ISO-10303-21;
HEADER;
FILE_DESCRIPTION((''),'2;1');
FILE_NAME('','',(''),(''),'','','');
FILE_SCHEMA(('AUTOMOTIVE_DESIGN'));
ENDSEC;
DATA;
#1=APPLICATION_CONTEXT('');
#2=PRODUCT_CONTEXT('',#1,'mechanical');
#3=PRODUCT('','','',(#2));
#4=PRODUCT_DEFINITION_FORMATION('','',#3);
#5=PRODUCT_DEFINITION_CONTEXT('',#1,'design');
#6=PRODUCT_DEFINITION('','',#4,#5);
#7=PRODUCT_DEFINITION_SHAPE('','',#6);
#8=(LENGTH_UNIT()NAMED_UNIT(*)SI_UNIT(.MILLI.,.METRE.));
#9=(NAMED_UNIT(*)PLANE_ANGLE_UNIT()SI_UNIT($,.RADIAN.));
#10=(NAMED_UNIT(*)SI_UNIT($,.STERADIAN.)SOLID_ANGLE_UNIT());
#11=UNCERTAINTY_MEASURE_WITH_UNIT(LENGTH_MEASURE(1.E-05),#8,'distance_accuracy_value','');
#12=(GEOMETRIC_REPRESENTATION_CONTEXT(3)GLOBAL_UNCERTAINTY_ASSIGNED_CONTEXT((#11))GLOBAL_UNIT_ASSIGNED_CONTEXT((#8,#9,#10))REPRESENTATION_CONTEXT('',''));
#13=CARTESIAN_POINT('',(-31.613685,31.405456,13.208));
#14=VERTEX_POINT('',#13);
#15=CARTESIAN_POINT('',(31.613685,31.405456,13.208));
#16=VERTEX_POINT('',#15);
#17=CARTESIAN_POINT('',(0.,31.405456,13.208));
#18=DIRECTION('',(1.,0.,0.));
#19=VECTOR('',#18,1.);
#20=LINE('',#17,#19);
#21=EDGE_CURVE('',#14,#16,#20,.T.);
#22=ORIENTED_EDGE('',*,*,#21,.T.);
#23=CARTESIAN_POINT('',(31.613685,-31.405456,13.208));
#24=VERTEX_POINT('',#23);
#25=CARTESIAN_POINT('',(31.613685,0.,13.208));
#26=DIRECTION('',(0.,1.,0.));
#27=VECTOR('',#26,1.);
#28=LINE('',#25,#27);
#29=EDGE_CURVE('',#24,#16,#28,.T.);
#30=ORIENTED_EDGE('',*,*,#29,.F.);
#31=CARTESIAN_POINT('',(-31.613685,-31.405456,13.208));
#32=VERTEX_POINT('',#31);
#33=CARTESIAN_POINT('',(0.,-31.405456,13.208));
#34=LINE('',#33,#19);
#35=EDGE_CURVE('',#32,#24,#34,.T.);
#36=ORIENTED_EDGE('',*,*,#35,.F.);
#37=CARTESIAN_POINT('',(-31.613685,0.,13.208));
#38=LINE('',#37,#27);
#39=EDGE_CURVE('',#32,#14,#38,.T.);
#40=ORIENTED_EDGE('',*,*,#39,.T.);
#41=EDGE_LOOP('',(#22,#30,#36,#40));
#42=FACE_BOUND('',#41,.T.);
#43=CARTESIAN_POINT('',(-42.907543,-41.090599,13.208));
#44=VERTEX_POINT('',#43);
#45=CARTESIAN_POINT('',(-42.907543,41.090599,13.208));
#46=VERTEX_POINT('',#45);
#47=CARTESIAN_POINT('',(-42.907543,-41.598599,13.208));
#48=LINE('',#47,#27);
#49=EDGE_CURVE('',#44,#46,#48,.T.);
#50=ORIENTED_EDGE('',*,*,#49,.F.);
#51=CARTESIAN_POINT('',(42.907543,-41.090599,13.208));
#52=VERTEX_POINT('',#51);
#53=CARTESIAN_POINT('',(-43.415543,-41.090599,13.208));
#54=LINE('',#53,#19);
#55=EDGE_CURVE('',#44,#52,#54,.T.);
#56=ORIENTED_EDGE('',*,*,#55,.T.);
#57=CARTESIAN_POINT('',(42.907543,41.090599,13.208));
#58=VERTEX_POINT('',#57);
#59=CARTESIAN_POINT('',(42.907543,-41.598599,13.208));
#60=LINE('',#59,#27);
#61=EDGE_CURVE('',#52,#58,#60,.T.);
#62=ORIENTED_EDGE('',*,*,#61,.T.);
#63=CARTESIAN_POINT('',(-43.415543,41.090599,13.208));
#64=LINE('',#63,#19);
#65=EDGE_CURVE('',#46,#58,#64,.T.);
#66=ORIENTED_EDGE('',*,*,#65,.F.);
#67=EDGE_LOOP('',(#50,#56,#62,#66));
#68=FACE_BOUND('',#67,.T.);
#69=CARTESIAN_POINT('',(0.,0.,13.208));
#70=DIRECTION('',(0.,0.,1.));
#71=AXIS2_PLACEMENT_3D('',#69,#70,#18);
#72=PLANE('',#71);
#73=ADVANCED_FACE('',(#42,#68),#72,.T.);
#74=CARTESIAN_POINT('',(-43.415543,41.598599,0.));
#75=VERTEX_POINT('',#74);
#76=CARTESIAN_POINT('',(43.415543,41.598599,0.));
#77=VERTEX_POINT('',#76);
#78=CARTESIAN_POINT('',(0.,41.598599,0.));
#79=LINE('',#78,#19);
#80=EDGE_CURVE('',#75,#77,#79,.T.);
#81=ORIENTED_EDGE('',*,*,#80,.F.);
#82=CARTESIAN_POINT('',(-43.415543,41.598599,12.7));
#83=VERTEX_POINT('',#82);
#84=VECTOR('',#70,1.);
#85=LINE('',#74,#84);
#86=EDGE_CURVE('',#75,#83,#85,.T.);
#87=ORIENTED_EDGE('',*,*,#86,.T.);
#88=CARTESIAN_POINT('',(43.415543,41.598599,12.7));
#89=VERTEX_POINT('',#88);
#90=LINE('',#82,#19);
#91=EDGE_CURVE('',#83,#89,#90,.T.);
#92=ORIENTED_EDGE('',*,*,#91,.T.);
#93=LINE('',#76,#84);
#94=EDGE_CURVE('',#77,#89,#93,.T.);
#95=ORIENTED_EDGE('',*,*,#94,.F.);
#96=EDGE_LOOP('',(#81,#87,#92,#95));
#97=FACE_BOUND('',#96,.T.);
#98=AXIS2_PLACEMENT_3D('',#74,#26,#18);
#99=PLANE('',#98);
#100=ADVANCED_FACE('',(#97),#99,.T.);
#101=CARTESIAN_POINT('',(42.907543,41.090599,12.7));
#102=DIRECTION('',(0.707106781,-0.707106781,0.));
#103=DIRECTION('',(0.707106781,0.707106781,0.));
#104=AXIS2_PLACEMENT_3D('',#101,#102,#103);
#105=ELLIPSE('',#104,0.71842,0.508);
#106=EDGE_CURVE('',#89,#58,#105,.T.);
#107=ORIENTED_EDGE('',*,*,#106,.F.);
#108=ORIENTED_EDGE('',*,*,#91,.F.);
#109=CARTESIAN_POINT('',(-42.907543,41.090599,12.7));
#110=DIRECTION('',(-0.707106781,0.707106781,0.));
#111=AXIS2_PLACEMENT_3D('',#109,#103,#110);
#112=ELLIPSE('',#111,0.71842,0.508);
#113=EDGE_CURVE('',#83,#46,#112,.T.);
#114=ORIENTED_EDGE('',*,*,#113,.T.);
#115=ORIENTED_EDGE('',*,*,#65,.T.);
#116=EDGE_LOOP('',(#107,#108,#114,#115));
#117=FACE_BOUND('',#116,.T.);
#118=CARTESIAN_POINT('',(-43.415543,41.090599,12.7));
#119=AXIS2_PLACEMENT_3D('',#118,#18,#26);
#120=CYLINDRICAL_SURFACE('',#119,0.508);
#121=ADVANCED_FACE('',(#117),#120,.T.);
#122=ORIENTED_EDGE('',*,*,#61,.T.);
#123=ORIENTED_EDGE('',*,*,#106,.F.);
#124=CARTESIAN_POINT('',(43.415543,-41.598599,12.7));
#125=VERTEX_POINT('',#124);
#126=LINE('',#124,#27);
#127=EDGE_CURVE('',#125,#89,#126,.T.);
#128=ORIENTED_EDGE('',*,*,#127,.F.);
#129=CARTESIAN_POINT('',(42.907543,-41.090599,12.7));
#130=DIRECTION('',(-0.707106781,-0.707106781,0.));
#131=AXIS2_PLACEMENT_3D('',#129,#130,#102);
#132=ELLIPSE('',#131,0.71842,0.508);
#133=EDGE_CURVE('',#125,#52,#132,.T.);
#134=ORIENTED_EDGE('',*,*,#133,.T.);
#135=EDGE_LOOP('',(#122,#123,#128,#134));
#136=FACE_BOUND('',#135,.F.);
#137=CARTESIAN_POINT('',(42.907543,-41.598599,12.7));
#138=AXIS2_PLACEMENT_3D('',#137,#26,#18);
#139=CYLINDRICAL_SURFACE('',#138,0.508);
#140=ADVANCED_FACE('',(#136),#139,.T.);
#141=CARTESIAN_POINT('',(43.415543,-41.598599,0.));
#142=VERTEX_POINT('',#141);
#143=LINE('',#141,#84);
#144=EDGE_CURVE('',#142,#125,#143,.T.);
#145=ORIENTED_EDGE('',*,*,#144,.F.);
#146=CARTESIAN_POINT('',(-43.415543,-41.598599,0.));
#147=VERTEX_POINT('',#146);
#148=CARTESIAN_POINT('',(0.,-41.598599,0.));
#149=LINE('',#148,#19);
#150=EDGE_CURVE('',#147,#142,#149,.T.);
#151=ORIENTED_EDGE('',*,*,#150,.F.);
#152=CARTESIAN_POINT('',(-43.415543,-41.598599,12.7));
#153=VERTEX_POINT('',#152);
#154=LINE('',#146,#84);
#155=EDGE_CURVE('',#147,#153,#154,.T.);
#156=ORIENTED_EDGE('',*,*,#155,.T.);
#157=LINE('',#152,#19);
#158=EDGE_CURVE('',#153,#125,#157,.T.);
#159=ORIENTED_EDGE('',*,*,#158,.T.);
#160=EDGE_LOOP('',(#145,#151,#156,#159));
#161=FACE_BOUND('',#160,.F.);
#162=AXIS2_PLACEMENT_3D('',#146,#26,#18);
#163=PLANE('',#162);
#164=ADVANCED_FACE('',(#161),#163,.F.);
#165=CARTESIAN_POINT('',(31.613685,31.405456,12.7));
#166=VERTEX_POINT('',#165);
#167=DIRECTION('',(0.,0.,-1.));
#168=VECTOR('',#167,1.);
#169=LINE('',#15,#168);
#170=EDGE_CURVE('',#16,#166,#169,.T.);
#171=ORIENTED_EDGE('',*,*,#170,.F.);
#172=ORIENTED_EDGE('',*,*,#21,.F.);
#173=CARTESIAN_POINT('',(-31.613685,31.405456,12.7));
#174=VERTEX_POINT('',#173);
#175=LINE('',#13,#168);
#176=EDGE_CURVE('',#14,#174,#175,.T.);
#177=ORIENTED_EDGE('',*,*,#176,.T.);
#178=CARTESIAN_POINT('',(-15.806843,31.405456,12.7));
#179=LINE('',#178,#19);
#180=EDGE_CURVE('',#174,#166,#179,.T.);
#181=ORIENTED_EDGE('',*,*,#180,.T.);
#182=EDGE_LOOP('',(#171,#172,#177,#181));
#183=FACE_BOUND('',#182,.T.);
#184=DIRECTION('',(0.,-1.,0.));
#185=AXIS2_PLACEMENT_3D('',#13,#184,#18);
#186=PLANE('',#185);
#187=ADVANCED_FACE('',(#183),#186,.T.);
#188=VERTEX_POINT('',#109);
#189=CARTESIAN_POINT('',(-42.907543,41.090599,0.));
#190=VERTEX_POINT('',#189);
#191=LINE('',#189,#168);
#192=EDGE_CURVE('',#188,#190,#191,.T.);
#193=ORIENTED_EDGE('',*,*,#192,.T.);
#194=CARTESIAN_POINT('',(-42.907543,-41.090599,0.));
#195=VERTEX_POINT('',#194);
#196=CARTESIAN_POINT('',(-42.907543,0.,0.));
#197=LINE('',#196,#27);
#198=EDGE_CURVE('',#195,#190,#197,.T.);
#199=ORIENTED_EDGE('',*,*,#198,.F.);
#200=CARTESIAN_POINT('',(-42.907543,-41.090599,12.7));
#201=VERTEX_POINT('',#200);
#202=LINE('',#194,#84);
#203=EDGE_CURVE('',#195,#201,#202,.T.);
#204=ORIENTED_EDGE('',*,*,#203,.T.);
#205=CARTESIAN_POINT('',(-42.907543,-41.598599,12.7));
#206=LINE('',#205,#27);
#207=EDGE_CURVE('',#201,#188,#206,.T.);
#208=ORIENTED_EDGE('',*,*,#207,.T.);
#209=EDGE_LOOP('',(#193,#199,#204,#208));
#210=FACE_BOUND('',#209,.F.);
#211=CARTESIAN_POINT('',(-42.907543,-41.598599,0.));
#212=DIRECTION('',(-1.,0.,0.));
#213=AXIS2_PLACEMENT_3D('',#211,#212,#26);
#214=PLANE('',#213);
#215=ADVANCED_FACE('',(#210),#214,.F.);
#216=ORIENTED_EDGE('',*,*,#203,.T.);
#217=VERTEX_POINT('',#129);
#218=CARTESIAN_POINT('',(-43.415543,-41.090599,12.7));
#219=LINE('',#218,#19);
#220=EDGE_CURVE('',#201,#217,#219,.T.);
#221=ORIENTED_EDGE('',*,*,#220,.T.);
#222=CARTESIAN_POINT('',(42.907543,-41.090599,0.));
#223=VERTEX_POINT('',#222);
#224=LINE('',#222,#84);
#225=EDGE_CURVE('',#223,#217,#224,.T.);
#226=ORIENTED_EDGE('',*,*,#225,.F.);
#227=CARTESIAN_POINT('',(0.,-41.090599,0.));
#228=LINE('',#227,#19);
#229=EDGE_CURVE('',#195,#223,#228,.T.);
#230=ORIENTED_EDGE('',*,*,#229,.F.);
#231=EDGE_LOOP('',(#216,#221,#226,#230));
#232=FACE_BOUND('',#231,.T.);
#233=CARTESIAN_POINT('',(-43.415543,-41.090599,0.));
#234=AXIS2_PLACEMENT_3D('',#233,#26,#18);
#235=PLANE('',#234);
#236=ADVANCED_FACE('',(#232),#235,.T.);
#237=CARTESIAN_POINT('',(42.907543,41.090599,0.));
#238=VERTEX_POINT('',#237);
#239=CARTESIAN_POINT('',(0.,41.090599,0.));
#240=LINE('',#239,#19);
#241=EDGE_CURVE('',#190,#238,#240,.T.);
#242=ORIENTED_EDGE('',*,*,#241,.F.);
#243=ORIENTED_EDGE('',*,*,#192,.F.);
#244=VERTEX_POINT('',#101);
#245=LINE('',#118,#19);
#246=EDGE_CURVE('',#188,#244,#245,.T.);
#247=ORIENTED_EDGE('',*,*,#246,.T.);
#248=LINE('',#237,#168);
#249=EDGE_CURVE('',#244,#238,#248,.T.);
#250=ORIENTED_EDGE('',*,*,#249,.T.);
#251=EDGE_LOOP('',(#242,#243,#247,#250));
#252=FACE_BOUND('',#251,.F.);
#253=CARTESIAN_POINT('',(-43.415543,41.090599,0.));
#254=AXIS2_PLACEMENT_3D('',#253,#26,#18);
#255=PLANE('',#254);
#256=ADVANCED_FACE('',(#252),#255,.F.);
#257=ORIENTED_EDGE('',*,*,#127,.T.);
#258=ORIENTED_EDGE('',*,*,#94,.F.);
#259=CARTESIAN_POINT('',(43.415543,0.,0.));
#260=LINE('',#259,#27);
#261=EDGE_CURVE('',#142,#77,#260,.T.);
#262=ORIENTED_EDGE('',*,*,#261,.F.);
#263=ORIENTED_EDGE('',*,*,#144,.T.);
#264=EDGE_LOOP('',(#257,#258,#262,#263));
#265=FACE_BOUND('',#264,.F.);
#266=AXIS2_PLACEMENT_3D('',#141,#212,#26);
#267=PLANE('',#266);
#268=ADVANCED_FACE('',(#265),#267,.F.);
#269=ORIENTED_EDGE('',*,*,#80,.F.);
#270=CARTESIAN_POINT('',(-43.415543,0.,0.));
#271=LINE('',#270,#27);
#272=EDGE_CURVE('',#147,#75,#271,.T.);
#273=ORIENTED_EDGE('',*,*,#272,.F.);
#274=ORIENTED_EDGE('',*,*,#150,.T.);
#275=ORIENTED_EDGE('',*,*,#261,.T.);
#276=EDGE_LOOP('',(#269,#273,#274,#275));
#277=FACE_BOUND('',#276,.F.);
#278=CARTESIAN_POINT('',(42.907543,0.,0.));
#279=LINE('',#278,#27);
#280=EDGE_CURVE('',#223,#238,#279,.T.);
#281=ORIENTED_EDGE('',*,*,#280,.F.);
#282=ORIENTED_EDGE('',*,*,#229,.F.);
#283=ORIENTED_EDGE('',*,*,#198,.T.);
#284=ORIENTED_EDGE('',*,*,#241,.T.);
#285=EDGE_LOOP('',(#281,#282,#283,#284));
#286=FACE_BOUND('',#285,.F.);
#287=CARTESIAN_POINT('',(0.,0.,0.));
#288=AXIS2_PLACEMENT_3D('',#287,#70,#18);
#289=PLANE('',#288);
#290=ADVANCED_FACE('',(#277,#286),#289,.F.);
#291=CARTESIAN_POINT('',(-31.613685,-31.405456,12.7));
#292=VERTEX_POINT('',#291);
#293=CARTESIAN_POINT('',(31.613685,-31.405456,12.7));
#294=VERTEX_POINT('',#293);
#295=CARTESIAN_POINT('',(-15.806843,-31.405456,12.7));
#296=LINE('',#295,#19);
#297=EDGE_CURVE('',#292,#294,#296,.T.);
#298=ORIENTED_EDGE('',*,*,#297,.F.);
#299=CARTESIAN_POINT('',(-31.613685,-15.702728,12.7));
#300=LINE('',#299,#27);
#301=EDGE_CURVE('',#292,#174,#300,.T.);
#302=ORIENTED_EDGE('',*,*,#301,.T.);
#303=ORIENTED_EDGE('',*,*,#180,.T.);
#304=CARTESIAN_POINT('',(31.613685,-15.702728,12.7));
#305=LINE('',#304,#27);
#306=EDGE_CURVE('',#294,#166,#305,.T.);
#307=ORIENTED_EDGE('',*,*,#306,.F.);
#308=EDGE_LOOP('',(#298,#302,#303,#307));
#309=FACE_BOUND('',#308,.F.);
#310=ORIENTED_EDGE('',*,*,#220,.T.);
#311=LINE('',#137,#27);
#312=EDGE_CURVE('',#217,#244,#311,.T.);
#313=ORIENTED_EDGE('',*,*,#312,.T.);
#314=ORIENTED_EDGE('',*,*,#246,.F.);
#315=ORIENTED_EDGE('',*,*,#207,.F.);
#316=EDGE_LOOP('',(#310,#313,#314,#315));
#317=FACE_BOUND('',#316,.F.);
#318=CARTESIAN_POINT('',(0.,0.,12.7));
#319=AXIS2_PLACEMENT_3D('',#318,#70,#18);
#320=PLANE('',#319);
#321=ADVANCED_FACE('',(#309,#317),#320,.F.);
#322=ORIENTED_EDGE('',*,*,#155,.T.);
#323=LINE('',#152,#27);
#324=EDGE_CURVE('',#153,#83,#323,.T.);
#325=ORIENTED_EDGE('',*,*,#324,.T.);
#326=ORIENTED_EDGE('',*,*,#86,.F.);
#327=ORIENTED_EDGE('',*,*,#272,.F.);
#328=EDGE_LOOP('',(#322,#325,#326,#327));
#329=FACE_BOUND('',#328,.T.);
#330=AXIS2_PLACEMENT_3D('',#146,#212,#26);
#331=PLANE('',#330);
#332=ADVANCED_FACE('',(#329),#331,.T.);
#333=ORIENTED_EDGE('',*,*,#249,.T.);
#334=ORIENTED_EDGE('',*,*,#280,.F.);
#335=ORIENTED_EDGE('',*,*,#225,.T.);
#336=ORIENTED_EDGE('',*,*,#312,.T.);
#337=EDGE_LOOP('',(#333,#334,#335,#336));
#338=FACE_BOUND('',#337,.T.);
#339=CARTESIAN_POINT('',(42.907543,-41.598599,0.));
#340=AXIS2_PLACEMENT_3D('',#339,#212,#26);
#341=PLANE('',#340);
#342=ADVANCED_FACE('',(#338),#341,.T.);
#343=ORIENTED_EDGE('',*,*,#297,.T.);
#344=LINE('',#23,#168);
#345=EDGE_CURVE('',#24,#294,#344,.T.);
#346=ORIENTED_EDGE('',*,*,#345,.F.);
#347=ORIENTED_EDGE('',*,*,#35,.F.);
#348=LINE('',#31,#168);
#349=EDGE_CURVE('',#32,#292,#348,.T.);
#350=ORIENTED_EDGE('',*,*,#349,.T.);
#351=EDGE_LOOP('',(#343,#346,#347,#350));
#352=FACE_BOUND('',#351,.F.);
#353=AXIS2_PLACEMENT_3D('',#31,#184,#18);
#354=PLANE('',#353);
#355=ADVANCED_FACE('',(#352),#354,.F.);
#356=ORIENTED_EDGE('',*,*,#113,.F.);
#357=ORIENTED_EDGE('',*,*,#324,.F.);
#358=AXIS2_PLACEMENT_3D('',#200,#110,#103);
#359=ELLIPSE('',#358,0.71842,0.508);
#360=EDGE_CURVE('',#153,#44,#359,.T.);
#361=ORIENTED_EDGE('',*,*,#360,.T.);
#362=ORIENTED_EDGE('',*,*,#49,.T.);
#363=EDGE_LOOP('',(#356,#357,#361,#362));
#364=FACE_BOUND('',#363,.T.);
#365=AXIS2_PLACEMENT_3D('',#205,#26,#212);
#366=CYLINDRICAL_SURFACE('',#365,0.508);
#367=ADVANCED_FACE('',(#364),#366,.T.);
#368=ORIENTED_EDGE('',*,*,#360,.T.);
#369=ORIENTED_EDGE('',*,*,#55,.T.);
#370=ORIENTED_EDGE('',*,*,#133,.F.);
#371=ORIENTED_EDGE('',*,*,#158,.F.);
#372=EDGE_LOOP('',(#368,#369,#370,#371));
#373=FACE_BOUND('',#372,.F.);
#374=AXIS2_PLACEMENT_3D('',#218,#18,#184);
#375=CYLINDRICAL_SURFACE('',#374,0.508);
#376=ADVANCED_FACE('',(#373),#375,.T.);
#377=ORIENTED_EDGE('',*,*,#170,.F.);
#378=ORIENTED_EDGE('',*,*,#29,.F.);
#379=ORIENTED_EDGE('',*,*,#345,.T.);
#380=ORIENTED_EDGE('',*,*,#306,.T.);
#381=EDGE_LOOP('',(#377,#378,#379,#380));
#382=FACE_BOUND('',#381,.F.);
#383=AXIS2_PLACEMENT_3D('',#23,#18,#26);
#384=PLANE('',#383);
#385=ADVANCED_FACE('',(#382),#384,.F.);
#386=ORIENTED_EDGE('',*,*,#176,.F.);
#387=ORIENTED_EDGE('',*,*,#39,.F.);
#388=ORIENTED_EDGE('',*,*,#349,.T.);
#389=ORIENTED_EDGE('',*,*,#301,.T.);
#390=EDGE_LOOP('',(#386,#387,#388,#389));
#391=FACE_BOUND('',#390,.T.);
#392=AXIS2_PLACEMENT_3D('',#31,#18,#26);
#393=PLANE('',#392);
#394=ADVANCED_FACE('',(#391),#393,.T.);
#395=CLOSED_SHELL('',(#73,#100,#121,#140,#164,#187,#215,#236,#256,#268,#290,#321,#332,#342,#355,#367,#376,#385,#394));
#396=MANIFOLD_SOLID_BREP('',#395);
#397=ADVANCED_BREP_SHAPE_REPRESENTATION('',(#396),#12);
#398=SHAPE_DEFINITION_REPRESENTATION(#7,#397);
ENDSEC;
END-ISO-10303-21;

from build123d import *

# Parameters (mm, degrees)
F0_W     = 86.8310853839
F0_H     = 83.1971988082
F1_DEPTH = 13.208
F2_R     = 0.508
F3_T     = 0.508
F4_W     = 63.2273703814
F4_H     = 62.8109127283
F5_DEPTH = 17.272


# Not quite as in the source:
# - a shell that OpenCascade refuses in one call is made with other operations: the cavity is built on its own and cut out


with BuildPart() as f1:
    # F0 (on Top) → F1 (new body)
    with BuildSketch(Plane.XY):
        Rectangle(F0_W, F0_H)
    extrude(amount=F1_DEPTH)

    # F2
    f2_edges = [f1.edges().sort_by_distance(p)[0] for p in [
        (0, -41.598599, 13.208),
        (-43.415543, 0, 13.208),
        (0, 41.598599, 13.208),
        (43.415543, 0, 13.208),
    ]]
    fillet(f2_edges, radius=F2_R)

    # F3: shell of thickness 0.508, made by hand


with BuildPart() as f3_core1:
    # F3_t2: copy of F1
    add(f1.part)

    # the walls: a layer under each face that stays
    f3_faces = [f3_core1.faces().sort_by_distance(p)[0] for p in [
        (0, -41.5985994041, 6.35),
        (-43.4155426919, 0, 6.35),
        (43.4155426919, 0, 6.35),
        (0, 41.5985994041, 6.35),
        (0, 0, 13.208),
    ]]
    thicken(f3_faces, amount=-F3_T, mode=Mode.SUBTRACT)


with BuildPart() as f1_1:
    add(f1.part)

    # what is left inside the walls is the cavity
    f3_cavity = [f3_core1.part.solids().sort_by_distance(p)[0] for p in [
        (0, -13.696866, 12.69492),
    ]]
    add(f3_cavity, mode=Mode.SUBTRACT)

    # F4 (on face) → F5 (cut)
    with BuildSketch(Plane.XY.offset(13.208)):
        Rectangle(F4_W, F4_H)
    extrude(amount=-F5_DEPTH, mode=Mode.SUBTRACT)


solid = f1_1.part
